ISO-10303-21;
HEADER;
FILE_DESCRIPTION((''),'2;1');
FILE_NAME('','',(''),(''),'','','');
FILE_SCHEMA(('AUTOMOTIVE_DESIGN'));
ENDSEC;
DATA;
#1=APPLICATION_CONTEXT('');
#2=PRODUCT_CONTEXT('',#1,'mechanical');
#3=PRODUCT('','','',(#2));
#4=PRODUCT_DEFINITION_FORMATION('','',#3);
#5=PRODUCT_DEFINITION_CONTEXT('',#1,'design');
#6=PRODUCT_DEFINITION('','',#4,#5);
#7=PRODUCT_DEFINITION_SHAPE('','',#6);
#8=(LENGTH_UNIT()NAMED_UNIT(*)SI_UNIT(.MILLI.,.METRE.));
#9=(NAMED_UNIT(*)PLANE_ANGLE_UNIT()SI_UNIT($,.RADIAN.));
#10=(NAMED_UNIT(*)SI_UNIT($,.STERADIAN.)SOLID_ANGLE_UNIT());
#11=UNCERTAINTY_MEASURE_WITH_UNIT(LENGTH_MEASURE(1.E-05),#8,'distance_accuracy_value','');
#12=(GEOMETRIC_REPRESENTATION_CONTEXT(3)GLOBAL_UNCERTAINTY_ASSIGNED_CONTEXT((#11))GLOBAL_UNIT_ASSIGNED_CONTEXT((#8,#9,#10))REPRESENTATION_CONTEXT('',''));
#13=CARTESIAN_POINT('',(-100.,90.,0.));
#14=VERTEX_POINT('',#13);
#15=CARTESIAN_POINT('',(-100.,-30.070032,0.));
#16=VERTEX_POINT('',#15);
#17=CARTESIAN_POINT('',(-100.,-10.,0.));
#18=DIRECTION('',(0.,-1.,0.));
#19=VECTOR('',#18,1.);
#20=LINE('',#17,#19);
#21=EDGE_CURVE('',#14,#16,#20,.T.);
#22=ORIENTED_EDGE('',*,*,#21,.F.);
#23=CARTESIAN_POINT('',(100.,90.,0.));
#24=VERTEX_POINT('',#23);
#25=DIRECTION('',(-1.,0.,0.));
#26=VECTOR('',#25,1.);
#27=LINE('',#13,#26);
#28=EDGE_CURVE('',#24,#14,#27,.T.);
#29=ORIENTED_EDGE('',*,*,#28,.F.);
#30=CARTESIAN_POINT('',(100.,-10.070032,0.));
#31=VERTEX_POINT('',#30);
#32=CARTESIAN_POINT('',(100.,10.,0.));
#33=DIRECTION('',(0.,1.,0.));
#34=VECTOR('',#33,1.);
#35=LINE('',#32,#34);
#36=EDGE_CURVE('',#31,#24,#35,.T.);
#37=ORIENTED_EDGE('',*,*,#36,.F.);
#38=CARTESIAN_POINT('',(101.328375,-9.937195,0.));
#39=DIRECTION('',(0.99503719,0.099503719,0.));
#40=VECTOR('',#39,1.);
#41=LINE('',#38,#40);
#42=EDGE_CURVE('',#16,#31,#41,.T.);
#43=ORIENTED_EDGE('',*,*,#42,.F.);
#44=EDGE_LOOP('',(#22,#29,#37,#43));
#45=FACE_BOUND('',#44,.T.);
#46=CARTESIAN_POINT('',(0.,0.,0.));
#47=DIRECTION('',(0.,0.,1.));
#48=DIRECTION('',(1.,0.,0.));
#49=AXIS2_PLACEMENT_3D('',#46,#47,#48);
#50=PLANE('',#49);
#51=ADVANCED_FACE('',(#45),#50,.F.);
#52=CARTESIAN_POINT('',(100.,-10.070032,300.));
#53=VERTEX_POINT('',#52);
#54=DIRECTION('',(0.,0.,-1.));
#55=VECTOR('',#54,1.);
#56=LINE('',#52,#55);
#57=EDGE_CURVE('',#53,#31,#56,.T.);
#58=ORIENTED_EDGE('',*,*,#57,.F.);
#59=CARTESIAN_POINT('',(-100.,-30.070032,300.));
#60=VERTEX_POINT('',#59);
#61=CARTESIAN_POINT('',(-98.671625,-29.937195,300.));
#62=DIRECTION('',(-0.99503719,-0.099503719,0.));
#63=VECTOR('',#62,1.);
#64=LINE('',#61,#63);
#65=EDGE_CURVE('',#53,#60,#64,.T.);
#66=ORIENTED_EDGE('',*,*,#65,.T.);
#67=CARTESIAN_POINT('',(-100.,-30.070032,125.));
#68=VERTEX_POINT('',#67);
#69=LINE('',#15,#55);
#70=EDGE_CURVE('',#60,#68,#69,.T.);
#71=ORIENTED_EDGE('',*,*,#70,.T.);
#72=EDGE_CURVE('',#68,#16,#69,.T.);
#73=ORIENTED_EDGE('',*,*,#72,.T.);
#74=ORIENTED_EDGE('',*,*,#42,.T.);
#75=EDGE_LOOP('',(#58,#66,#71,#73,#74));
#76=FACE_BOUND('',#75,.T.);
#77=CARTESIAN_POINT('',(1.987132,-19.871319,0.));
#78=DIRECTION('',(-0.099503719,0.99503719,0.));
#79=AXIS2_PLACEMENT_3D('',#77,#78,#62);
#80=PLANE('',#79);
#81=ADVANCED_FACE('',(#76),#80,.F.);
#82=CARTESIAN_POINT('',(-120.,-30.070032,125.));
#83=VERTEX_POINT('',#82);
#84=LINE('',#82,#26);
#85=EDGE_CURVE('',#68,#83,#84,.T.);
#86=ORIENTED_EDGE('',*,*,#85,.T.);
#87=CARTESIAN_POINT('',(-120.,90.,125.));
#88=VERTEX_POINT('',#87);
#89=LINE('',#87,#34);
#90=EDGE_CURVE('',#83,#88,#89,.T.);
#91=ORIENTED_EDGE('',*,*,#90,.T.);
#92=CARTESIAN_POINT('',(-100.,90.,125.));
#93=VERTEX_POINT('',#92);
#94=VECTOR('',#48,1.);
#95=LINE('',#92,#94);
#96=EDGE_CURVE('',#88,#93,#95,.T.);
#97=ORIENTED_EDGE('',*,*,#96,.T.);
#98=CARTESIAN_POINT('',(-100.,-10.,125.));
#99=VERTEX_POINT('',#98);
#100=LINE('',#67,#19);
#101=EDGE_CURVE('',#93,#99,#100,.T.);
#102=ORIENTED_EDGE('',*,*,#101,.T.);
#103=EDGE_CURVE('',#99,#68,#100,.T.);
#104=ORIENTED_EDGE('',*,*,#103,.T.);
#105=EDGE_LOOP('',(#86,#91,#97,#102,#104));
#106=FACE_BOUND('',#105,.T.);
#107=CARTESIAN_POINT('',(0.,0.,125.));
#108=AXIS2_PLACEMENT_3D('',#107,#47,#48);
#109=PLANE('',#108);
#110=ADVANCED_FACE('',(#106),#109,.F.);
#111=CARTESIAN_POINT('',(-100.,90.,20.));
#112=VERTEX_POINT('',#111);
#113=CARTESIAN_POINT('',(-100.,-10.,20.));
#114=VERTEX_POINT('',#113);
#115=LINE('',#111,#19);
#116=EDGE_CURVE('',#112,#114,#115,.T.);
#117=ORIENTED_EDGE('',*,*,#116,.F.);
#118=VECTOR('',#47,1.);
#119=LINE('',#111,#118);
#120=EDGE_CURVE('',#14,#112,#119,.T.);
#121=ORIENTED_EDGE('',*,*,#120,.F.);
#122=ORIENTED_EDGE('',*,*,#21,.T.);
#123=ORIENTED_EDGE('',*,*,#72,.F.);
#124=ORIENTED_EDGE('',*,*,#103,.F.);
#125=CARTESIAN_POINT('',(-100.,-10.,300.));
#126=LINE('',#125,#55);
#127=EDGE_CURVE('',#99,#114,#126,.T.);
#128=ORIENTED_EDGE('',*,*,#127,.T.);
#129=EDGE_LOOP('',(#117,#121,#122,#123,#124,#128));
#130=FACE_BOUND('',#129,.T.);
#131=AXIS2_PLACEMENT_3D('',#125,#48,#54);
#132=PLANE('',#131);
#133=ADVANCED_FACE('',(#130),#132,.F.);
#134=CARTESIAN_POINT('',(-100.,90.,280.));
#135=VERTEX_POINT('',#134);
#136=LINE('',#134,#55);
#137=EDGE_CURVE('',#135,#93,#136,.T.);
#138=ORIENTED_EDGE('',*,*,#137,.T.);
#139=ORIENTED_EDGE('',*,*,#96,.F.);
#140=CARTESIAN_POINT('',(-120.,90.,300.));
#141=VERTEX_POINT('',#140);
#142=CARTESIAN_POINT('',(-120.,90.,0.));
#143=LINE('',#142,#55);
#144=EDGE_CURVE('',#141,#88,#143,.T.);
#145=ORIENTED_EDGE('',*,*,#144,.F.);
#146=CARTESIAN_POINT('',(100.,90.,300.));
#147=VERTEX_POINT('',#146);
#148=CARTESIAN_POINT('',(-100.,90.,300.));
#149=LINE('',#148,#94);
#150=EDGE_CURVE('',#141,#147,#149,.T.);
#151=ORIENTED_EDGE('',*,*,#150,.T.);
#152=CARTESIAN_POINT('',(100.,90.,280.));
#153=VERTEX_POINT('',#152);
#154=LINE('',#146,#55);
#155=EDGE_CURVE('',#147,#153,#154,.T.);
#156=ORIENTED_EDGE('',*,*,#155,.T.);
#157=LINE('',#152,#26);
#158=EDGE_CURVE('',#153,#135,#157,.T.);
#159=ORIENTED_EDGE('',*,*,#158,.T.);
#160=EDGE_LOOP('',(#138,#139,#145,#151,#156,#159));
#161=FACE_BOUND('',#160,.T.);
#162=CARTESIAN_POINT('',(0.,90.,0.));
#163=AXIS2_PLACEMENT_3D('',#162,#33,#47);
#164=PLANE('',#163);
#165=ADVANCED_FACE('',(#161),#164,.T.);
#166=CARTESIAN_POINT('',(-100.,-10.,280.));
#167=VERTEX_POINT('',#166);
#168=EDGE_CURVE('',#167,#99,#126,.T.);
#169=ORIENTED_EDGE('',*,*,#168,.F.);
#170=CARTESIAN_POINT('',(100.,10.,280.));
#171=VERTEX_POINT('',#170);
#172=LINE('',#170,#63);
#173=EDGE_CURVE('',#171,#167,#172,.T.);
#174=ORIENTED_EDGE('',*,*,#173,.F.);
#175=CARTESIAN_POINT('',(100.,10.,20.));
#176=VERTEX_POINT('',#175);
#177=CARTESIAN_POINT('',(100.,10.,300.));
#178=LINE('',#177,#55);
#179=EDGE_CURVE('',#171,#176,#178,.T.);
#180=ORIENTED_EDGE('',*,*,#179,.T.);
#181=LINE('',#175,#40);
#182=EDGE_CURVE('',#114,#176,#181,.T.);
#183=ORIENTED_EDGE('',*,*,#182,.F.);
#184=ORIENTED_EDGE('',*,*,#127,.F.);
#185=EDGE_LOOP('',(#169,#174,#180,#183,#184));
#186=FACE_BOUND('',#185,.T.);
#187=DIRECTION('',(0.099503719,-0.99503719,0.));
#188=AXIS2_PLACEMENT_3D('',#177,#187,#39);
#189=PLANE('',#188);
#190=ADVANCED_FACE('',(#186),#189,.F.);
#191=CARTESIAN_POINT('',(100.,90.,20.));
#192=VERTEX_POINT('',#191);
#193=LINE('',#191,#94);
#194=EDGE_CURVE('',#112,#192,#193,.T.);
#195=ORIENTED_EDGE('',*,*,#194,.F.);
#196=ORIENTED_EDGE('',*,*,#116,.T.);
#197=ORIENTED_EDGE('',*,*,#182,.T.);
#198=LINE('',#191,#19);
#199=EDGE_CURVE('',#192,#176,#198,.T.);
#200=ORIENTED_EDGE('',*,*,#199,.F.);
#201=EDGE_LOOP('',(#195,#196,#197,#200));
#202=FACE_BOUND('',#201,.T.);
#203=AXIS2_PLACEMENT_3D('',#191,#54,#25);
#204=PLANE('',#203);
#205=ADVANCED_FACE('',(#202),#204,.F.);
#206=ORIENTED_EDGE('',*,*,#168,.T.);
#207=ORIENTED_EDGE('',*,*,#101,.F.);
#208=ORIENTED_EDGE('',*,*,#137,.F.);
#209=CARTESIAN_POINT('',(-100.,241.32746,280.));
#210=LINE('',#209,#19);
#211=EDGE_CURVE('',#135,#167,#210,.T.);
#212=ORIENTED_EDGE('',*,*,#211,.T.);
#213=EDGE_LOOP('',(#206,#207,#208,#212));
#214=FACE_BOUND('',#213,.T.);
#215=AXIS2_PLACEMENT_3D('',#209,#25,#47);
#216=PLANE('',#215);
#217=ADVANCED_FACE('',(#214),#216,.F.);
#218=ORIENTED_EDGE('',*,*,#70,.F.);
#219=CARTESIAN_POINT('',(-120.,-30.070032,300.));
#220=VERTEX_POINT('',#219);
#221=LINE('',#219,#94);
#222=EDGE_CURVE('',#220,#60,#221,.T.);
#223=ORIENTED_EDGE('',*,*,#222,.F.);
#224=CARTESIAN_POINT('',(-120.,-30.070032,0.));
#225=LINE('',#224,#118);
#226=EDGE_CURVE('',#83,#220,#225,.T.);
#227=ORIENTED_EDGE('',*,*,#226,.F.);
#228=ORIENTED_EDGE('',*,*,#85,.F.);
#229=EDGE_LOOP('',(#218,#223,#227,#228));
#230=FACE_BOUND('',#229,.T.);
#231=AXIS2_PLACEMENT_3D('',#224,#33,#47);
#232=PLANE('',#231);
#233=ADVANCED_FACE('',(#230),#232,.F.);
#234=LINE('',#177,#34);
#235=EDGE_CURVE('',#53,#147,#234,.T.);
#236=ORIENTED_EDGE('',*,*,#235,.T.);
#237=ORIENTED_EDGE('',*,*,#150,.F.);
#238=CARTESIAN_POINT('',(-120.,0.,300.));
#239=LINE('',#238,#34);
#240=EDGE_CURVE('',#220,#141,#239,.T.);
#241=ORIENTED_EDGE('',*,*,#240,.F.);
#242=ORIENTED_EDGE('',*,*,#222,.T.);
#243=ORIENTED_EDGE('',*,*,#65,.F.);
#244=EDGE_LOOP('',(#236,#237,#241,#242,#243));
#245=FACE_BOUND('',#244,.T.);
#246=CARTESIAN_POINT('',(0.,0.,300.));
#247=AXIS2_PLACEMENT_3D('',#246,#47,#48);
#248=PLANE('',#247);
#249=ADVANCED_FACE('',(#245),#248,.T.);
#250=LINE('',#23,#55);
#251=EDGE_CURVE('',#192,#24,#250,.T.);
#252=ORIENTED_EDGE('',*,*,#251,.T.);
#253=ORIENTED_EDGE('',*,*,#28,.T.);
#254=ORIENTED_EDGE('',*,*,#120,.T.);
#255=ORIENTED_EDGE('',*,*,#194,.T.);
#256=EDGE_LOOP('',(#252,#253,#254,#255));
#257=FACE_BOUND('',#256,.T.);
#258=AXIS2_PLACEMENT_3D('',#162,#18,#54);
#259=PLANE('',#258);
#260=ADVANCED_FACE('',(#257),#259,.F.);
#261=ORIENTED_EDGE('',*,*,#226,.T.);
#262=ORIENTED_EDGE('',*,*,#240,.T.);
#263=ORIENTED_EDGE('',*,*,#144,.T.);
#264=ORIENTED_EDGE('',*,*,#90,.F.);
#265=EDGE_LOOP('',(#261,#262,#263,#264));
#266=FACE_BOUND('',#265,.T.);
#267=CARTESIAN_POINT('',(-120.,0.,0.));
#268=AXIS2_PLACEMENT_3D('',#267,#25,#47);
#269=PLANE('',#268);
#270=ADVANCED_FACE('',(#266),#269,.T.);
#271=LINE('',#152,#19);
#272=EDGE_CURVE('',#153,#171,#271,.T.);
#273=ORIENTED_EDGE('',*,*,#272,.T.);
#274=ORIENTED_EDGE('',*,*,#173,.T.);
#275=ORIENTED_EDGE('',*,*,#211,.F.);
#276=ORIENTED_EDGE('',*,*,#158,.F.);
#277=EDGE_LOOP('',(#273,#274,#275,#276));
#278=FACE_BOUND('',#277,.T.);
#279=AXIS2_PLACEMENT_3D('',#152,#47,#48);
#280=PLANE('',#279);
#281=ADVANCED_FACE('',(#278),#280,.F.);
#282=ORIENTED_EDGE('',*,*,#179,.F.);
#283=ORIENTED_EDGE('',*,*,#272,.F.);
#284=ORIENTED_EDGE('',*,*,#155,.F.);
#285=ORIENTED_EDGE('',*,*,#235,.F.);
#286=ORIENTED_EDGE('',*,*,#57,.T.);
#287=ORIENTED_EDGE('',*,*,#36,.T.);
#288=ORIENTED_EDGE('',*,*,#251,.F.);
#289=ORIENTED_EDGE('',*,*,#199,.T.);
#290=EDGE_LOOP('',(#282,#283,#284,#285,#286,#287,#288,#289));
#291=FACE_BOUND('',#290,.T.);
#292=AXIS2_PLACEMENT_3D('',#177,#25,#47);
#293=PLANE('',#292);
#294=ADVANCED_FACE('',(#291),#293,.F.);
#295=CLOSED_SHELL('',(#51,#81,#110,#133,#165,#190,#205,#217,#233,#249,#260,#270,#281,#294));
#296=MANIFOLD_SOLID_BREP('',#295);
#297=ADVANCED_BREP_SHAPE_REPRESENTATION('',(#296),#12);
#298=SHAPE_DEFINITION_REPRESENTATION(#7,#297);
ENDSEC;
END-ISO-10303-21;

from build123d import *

# Parameters (mm, degrees)
BOSS_EXTRUDE1_DEPTH     = 300
SKETCH3_W               = 200
SKETCH3_H               = 20
BOSS_EXTRUDE3_DEPTH     = 90
CUT_EXTRUDE1_DEPTH      = 311.64449134
CUT_EXTRUDE1_DEPTH_BACK = 311.64449134
SKETCH5_W               = 200.997512422
SKETCH5_H               = 300
BOSS_EXTRUDE4_DEPTH     = 13.35
BOSS_EXTRUDE5_DEPTH     = 300
CUT_EXTRUDE2_START      = 100
CUT_EXTRUDE2_OUTLINE_W  = 16
CUT_EXTRUDE2_OUTLINE_H  = 302
CUT_EXTRUDE2_DEPTH      = 2
BOSS_EXTRUDE6_DEPTH     = 20
SKETCH9_W               = 20
SKETCH9_H               = 150
BOSS_EXTRUDE7_DEPTH     = 100
SKETCH10_W              = 20
SKETCH10_H              = 120.070032415
BOSS_EXTRUDE8_DEPTH     = 5


with BuildPart() as part:
    # Sketch2 → Boss-Extrude1 (new body)
    with BuildSketch(Plane.XY):
        Polygon((-100, -10), (-100, -16.653448461), (100, 3.346551539), (100, 10), align=None)
    extrude(amount=BOSS_EXTRUDE1_DEPTH)

    # Sketch3 → Boss-Extrude3 (add, symmetric)
    with BuildSketch(Plane(origin=(0, 0, 0), x_dir=(1, 0, 0), z_dir=(0, 1, 0))):
        with Locations((0, -10)):
            Rectangle(SKETCH3_W, SKETCH3_H)
        with Locations((0, -290)):
            Rectangle(SKETCH3_W, SKETCH3_H)
    extrude(amount=BOSS_EXTRUDE3_DEPTH, both=True)

    # Sketch4 → Cut-Extrude1 (cut, two sides: drawn at the far end of the back side and taken through both)
    with BuildSketch(Plane.XY.offset(20).offset(-CUT_EXTRUDE1_DEPTH_BACK)):
        Polygon((-100, -16.653448461), (-100, -90), (100, -90), (100, 3.346551539), align=None)
    extrude(amount=CUT_EXTRUDE1_DEPTH + CUT_EXTRUDE1_DEPTH_BACK, mode=Mode.SUBTRACT)

    # Sketch5 → Boss-Extrude4 (add)
    with BuildSketch(Plane(origin=(0.658757273, -6.587572734, 0), x_dir=(0.9950371902099892, 0.09950371902099911, 0), z_dir=(0.09950371902099912, -0.9950371902099893, 0))):
        with Locations((-0.662042866, 150)):
            Rectangle(SKETCH5_W, SKETCH5_H)
    extrude(amount=BOSS_EXTRUDE4_DEPTH)

    # Boss-Extrude5: read off the stored shape, not the designer's step
    # Boss-Extrude5 outline → Boss-Extrude5 (add)
    with BuildSketch(Plane.XY):
        Polygon((-100, -16.653448461), (-100, -30.070032415), (-98.671625351, -29.93719495), align=None)
    extrude(amount=BOSS_EXTRUDE5_DEPTH)

    # Cut-Extrude2: read off the stored shape, not the designer's step
    # Cut-Extrude2 outline → Cut-Extrude2 (cut)
    with BuildSketch(Plane.YZ.offset(CUT_EXTRUDE2_START)):
        with Locations((-3, 150)):
            Rectangle(CUT_EXTRUDE2_OUTLINE_W, CUT_EXTRUDE2_OUTLINE_H)
    extrude(amount=CUT_EXTRUDE2_DEPTH, mode=Mode.SUBTRACT)

    # Sketch8 → Boss-Extrude6 (add)
    with BuildSketch(Plane.ZY.offset(100)):
        Polygon((300, 90), (280, 90), (280, -10), (130, -10), (130, -30.070032415), (300, -30.070032415), align=None)
    extrude(amount=BOSS_EXTRUDE6_DEPTH)

    # Sketch9 → Boss-Extrude7 (add)
    with BuildSketch(Plane(origin=(0, -10, 0), x_dir=(1, 0, 0), z_dir=(0, 1, 0))):
        with Locations((-110, -205)):
            Rectangle(SKETCH9_W, SKETCH9_H)
    extrude(amount=BOSS_EXTRUDE7_DEPTH)

    # Sketch10 → Boss-Extrude8 (add)
    with BuildSketch(Plane(origin=(0, 0, 130), x_dir=(-1, 0, 0), z_dir=(0, 0, -1))):
        with Locations((110, 29.964983792)):
            Rectangle(SKETCH10_W, SKETCH10_H)
    extrude(amount=BOSS_EXTRUDE8_DEPTH)


solid = part.part
